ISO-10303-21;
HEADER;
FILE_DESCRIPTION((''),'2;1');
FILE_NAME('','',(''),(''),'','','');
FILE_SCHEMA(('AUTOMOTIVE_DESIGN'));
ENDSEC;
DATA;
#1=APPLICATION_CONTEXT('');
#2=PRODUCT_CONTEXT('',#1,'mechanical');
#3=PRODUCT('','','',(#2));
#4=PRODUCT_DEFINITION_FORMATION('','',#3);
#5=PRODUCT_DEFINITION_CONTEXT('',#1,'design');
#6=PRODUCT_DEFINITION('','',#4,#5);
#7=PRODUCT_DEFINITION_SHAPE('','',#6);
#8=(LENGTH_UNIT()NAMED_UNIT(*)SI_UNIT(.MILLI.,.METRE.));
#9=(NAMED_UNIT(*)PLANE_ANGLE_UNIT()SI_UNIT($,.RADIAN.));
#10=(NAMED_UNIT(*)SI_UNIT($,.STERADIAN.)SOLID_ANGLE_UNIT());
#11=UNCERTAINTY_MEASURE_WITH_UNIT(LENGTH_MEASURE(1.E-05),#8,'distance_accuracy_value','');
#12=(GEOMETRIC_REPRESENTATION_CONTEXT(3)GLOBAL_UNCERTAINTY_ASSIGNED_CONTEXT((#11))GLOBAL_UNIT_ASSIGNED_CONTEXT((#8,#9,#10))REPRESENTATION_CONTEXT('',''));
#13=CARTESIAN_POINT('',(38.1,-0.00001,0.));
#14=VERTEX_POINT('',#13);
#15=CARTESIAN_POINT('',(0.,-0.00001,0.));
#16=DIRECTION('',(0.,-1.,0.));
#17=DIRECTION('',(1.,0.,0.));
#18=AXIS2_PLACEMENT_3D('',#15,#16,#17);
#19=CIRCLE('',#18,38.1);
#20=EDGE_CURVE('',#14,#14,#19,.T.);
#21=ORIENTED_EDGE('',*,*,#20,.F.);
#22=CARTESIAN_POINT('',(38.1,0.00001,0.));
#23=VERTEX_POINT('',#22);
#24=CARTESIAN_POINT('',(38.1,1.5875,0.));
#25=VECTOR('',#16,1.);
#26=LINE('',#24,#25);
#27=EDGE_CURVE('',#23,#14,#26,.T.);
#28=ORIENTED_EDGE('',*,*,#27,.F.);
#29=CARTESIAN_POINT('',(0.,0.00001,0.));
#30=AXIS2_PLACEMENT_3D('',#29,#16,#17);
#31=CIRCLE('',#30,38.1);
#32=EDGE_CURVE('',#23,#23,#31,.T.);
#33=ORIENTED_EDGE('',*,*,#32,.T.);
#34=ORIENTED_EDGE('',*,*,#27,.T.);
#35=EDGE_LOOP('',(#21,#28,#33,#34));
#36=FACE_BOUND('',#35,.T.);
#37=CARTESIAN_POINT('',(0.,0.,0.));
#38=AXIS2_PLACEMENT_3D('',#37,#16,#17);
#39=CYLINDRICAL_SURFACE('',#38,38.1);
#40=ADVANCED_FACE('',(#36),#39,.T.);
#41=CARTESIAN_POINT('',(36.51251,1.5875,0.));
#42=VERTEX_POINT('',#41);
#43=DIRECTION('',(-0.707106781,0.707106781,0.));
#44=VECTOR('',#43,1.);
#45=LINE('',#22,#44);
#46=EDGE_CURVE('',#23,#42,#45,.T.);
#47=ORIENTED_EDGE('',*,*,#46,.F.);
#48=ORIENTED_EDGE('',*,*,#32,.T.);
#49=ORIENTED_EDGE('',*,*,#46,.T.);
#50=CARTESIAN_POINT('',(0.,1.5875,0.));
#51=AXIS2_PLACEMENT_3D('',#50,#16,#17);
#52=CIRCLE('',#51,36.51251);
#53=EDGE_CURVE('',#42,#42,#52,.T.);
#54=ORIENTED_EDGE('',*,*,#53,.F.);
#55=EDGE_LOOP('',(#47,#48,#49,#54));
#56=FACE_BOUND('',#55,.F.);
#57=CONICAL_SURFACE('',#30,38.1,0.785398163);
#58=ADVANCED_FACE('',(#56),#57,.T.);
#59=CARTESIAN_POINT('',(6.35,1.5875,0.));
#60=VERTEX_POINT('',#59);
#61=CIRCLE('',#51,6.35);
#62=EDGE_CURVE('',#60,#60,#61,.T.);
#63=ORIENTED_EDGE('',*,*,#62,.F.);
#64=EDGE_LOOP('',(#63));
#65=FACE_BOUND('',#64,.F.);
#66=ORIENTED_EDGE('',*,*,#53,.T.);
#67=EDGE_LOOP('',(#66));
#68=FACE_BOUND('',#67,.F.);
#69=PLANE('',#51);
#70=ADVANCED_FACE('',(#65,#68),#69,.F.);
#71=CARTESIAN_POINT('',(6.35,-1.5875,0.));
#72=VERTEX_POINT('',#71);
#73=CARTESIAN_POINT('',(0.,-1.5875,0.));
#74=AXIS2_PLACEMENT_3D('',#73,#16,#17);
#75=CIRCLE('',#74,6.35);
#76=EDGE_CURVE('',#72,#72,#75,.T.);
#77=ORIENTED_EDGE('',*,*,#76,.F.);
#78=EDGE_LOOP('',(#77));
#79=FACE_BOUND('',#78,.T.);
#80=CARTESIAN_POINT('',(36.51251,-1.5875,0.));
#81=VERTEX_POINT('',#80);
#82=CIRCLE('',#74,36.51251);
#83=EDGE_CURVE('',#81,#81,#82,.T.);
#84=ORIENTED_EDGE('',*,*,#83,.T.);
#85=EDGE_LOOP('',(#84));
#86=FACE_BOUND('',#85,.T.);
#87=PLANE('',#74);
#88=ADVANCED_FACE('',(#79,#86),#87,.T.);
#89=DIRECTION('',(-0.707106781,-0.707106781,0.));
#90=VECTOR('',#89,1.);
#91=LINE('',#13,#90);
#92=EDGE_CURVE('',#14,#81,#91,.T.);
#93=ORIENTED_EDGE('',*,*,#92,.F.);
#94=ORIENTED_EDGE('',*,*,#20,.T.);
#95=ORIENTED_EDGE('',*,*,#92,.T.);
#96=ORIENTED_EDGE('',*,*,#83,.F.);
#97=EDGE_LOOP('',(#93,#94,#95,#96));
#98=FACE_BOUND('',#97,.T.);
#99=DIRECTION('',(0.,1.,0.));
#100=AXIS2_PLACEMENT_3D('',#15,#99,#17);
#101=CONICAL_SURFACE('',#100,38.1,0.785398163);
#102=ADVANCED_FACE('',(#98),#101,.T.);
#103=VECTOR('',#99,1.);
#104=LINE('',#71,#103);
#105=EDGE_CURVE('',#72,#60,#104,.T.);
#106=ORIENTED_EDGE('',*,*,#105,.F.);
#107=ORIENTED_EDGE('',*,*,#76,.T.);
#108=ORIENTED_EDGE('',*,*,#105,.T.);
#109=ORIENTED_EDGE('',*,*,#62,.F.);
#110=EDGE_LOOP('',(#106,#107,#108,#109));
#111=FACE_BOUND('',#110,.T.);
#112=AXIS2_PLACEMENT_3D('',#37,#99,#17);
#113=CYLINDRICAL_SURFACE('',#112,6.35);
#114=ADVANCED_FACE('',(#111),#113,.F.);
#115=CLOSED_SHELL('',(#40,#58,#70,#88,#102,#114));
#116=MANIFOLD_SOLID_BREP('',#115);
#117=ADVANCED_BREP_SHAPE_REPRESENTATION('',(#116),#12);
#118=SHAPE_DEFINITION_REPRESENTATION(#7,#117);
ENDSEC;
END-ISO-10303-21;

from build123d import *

# Parameters (mm, degrees)
F0_R     = 38.1
F0_R_2   = 6.35
F1_DEPTH = 1.5875
F2_SIZE  = 1.58749


# Not quite as in the source:
# - a fillet or chamfer is up to 0.001 mm smaller than in the source, because OpenCascade refuses the exact size


with BuildPart() as f1:
    # F0 (on Front) → F1 (new body, symmetric)
    with BuildSketch(Plane.XZ):
        Circle(F0_R)
        Circle(F0_R_2, mode=Mode.SUBTRACT)
    extrude(amount=F1_DEPTH, both=True)

    # F2 (size 1.5875 in the source; OpenCascade refuses exactly that, so slightly less here)
    f2_edges = [f1.edges().sort_by_distance(p)[0] for p in [
        (-38.1, 1.5875, 0),
        (-38.1, -1.5875, 0),
    ]]
    chamfer(f2_edges, length=F2_SIZE)


solid = f1.part
